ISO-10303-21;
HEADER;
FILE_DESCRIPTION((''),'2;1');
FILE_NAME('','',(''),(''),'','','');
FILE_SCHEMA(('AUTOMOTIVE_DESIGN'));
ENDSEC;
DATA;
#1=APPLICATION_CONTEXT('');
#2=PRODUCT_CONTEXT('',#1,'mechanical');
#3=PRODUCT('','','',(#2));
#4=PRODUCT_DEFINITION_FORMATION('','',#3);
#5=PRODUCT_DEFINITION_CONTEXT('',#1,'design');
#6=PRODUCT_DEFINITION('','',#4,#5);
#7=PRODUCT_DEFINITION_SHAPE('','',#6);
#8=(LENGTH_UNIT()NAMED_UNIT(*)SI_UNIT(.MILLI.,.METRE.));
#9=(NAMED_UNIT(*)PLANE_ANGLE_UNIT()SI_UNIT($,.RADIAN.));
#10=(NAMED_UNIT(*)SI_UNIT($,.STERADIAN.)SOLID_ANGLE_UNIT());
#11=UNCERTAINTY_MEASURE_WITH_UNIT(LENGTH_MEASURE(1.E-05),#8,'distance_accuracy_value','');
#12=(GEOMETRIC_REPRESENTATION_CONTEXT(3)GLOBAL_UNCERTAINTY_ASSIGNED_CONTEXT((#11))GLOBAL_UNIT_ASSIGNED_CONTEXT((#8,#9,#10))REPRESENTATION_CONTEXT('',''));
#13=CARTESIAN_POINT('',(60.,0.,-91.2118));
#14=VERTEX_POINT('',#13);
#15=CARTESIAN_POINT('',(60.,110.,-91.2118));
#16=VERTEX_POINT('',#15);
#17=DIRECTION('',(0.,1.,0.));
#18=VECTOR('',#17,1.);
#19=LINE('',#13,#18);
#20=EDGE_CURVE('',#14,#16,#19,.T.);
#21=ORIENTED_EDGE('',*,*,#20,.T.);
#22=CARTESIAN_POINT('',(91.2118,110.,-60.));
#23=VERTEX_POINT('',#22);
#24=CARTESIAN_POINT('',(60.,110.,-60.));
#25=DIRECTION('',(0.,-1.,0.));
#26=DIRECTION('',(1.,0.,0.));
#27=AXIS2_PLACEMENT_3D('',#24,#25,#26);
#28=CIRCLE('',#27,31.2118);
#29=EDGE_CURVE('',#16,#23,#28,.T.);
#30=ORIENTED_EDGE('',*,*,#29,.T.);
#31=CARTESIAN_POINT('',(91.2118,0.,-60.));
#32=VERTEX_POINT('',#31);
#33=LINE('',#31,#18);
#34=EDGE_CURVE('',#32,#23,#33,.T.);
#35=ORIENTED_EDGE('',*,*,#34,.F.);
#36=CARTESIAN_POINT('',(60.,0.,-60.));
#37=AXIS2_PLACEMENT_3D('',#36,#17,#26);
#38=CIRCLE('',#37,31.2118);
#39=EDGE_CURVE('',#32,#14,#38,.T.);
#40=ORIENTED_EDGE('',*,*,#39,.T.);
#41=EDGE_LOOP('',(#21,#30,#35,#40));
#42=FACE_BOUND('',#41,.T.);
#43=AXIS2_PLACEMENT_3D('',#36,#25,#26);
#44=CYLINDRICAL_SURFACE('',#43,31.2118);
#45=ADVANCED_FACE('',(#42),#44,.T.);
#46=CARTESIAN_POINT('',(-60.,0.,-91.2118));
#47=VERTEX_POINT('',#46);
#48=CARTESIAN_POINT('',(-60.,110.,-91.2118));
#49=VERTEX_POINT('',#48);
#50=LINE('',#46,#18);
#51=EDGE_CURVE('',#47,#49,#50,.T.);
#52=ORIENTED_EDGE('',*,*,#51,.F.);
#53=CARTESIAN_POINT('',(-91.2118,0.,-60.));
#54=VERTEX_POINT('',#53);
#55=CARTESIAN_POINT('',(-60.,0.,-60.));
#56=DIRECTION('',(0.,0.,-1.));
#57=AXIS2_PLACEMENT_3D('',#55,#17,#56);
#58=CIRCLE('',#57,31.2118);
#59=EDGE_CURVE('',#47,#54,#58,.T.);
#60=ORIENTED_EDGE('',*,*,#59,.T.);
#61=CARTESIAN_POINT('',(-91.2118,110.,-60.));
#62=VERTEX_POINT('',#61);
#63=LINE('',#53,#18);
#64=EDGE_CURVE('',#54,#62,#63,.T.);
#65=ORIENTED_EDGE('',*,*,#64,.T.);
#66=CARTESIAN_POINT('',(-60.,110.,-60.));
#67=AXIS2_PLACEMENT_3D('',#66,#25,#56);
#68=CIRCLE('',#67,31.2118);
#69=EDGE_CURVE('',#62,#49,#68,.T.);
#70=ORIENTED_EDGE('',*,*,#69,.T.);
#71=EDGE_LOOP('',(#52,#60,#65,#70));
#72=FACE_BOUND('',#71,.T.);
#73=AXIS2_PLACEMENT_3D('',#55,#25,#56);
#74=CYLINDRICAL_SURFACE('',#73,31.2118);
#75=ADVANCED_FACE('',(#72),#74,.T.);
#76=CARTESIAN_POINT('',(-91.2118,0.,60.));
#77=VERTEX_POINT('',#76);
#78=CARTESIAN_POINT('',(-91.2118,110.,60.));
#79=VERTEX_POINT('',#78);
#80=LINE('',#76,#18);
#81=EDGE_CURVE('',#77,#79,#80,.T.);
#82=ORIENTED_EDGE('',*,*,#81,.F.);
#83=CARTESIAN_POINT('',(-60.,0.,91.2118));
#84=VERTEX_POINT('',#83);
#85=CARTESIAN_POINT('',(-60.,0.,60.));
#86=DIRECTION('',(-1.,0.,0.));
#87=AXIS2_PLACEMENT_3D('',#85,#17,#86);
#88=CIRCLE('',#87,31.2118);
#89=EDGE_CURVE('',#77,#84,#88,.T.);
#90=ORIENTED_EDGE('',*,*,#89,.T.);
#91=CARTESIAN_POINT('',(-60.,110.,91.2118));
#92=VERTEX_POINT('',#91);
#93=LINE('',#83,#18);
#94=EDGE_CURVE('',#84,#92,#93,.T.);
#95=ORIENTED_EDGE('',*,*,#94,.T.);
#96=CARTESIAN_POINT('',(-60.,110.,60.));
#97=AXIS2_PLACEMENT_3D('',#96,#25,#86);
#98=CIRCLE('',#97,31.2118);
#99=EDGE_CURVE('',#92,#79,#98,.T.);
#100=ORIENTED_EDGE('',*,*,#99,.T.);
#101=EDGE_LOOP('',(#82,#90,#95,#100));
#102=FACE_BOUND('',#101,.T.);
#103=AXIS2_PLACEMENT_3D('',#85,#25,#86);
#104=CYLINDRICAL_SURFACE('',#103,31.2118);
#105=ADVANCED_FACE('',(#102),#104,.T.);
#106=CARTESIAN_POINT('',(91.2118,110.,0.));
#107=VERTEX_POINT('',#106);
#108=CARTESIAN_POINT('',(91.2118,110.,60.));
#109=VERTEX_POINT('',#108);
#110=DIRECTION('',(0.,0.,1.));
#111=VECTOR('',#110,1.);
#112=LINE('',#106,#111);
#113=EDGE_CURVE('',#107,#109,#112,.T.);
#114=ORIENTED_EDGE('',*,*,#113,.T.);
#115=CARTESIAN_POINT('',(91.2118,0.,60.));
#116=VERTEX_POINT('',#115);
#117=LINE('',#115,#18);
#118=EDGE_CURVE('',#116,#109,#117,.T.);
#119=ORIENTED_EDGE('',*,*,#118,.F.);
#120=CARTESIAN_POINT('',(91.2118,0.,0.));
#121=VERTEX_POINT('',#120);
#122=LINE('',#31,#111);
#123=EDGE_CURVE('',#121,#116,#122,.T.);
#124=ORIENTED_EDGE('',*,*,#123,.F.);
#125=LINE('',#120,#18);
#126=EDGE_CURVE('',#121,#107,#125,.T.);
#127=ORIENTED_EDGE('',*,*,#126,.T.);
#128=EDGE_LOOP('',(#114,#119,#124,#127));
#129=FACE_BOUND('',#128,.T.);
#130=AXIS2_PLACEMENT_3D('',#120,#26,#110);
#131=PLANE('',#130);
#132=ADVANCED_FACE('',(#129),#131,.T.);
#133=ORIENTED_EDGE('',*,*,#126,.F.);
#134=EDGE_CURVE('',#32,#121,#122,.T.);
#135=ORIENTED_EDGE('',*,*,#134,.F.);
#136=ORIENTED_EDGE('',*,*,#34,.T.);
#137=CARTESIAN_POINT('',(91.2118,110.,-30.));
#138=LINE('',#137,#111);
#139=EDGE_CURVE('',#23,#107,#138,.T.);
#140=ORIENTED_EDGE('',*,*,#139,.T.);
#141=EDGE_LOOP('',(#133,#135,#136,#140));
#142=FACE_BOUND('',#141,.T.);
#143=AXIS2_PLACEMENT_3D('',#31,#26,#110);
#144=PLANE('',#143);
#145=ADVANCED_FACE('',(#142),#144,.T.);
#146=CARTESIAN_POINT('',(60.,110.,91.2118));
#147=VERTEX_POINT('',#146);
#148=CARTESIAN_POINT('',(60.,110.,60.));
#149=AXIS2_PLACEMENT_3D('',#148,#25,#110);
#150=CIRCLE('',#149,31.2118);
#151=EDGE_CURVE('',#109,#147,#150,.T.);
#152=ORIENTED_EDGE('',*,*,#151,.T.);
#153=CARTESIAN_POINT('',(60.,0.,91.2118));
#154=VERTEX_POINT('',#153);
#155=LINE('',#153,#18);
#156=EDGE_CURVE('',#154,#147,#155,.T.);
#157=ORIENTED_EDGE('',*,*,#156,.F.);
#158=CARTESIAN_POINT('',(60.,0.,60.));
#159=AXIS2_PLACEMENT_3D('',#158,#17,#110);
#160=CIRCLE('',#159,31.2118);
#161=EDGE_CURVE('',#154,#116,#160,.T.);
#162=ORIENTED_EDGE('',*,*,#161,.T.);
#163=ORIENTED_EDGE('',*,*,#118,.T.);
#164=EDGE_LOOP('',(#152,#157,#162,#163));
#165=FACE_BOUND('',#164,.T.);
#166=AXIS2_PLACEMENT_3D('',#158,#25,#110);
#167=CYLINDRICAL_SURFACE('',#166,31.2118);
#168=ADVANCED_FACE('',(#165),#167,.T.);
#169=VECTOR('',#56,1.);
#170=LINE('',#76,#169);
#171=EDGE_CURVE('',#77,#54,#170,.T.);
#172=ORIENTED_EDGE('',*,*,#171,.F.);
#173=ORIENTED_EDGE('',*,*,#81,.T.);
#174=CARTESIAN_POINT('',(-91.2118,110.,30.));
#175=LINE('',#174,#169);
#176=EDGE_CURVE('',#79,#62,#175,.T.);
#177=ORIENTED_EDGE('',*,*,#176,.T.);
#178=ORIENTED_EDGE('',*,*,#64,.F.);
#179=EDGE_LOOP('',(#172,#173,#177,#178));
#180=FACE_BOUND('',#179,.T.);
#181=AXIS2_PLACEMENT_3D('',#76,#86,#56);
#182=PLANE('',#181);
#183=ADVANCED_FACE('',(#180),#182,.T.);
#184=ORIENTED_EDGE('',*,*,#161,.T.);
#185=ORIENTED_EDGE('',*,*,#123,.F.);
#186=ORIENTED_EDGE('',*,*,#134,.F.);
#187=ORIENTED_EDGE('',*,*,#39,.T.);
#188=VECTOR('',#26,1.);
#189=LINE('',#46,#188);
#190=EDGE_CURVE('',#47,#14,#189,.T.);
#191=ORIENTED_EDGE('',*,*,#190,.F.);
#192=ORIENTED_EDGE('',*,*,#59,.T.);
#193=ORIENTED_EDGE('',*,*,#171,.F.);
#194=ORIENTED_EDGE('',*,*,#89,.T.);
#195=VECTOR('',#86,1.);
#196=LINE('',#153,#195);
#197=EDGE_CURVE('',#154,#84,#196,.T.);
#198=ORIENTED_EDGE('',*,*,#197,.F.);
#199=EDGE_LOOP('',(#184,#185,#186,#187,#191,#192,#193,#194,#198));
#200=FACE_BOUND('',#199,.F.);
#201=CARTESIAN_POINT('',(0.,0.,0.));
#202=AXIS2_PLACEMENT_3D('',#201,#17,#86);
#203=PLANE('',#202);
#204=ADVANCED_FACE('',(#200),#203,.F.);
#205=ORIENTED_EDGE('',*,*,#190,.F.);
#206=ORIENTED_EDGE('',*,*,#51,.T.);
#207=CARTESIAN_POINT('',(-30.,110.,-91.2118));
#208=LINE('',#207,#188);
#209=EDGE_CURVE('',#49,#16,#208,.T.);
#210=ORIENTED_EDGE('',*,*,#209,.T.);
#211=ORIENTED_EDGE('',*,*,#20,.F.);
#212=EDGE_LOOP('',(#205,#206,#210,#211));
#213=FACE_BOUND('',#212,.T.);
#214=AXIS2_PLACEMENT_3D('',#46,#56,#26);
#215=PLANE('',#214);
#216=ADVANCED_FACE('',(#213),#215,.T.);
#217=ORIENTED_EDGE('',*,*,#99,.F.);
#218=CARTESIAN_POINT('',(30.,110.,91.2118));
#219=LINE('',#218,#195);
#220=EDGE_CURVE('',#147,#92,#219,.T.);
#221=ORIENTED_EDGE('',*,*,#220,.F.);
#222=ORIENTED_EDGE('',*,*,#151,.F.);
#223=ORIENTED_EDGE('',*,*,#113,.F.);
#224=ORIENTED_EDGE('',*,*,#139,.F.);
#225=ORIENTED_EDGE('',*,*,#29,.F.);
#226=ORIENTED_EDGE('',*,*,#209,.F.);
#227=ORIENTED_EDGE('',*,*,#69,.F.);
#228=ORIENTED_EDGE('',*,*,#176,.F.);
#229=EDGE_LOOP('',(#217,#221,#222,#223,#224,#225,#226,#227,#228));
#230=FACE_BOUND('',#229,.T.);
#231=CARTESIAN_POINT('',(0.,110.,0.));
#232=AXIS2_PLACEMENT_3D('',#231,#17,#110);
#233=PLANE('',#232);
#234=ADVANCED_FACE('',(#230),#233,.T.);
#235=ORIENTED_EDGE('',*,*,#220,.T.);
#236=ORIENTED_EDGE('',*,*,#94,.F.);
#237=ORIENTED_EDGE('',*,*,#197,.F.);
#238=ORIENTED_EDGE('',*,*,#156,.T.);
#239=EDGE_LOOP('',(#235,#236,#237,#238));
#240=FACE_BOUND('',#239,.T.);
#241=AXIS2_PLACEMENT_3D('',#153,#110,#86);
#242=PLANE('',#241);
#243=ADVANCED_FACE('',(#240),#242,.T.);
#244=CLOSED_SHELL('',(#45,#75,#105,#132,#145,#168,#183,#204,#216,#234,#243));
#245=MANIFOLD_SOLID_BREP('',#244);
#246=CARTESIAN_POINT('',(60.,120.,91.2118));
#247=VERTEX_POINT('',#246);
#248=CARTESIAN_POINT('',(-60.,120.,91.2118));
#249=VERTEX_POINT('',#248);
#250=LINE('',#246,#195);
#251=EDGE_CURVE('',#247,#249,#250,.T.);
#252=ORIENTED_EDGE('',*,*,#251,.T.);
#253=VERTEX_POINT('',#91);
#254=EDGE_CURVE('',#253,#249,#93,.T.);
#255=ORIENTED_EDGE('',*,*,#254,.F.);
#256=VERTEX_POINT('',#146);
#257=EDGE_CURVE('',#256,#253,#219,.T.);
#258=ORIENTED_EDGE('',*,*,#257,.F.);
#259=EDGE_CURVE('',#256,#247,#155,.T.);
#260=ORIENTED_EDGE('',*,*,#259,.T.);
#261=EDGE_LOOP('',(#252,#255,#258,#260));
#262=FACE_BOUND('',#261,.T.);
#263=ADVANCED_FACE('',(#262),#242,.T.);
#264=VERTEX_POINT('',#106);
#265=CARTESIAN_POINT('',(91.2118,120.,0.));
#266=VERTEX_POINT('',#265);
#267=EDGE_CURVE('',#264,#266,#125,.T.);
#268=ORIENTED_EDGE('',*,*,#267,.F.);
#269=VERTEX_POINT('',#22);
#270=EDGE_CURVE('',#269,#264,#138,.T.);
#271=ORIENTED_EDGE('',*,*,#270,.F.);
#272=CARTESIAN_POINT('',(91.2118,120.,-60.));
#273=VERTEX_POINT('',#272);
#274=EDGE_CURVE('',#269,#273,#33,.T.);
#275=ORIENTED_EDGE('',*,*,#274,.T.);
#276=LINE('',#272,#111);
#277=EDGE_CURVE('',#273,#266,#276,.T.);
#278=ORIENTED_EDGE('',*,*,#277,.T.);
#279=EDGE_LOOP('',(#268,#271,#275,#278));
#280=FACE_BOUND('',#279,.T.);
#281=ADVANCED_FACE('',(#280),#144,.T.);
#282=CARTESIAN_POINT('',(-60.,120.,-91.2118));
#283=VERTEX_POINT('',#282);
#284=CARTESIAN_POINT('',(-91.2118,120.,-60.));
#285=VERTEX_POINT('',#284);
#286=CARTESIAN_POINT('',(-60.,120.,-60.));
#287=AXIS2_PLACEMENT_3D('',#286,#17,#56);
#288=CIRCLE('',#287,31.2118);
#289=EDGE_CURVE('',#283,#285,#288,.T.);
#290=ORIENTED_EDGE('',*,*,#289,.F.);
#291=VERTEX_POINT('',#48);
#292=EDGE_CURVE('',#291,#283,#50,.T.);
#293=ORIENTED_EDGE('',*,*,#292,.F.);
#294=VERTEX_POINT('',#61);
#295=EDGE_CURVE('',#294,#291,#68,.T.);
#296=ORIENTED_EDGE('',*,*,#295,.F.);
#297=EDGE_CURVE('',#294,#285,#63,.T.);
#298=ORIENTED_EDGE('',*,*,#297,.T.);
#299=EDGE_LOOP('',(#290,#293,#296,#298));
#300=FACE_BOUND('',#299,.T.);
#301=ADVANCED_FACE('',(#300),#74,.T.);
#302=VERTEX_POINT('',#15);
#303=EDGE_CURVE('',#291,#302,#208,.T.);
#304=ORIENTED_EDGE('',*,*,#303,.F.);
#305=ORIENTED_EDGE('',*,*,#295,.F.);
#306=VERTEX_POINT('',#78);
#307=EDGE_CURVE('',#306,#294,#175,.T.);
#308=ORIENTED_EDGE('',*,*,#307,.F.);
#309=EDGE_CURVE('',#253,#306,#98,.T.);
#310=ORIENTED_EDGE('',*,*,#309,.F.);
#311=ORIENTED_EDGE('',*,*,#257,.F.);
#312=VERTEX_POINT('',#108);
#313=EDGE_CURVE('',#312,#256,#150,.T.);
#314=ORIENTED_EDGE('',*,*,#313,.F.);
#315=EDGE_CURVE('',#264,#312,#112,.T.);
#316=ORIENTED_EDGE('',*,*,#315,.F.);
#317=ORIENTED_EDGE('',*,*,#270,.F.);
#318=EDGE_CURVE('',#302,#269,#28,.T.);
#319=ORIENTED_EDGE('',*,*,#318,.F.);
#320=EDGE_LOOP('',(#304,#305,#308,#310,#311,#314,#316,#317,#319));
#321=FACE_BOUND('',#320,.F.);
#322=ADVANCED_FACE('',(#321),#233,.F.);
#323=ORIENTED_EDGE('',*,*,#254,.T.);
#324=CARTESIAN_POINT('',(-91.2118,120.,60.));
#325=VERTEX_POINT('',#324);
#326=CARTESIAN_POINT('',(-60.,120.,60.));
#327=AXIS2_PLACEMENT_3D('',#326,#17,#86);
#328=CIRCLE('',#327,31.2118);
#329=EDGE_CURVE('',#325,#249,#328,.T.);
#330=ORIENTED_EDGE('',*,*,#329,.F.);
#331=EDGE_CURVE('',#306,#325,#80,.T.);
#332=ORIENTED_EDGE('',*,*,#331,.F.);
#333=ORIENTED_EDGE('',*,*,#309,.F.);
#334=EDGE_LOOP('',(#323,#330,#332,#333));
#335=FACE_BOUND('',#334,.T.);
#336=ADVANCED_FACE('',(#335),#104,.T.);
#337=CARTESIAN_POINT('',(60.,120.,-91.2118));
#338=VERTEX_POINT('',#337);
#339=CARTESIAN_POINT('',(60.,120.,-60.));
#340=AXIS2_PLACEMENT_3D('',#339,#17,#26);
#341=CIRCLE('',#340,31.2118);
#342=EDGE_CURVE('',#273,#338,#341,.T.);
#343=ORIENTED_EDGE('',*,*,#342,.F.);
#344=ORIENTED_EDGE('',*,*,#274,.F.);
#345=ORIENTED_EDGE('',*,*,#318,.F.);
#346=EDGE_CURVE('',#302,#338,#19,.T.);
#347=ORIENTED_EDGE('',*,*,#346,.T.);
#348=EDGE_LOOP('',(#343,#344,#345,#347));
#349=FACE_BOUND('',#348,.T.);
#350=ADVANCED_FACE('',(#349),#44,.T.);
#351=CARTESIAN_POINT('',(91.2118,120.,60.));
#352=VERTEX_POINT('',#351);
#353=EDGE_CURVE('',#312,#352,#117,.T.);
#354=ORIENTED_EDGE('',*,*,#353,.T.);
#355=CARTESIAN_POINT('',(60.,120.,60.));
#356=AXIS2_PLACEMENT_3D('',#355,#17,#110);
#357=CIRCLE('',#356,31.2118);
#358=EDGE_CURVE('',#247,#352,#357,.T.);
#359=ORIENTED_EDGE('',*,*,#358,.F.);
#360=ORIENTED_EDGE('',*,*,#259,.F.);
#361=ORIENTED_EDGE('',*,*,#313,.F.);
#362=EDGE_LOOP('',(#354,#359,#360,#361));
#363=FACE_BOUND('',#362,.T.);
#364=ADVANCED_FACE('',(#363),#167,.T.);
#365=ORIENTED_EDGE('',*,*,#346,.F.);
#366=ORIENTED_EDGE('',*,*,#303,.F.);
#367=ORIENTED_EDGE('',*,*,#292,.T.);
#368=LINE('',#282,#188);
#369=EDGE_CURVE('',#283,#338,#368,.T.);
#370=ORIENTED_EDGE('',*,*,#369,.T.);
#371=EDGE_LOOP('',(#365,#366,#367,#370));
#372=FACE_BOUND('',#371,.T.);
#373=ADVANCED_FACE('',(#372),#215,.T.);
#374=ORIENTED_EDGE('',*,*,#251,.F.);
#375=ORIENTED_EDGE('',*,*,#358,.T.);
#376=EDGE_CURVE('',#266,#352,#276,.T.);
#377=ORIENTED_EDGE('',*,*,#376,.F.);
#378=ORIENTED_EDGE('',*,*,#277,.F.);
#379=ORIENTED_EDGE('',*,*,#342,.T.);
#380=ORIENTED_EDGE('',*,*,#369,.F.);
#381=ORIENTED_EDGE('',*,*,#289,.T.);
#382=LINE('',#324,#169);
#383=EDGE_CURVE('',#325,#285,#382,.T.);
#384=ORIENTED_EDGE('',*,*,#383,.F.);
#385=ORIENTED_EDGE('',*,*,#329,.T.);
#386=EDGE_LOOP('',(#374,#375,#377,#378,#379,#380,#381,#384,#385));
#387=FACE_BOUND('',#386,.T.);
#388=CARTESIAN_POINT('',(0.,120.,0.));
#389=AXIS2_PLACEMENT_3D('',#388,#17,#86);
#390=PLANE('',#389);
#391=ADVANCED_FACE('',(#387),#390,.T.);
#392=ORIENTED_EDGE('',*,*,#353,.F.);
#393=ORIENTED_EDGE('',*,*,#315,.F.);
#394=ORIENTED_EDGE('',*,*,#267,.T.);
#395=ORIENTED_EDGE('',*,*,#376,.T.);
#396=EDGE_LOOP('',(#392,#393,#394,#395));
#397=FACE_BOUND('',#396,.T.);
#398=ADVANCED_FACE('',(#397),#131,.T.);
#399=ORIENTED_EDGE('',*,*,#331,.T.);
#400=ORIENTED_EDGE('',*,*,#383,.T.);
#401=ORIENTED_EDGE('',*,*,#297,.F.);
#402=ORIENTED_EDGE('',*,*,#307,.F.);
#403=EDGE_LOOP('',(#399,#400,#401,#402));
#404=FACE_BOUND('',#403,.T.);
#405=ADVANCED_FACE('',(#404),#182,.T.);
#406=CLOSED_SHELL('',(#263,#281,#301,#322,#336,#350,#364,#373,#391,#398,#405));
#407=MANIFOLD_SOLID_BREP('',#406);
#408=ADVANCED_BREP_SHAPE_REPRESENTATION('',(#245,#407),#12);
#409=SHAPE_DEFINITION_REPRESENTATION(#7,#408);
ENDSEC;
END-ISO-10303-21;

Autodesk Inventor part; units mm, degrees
ref_plane "YZ Plane" through (0, 0, 0) normal (1, 0, 0) x (0, 1, 0)
ref_plane "XY Plane" through (0, 0, 0) normal (0, 0, 1) x (1, 0, 0)
sketch "Sketch1" plane through (0, 0, 0) normal (0, 1, 0) x (-1, 0, 0)
  line L0 (91.2118, 60) -> (91.2118, -60)
  arc A0 (60, -91.2118) -> (91.2118, -60) centre (60, -60) ccw
  arc A1 (-91.2118, -60) -> (-60, -91.2118) centre (-60, -60) ccw
  line L1 (-91.2118, -60) -> (-91.2118, 60)
  line L2 (-91.2118, 60) -> (-91.2118, 0)
  arc A2 (-60, 91.2118) -> (-91.2118, 60) centre (-60, 60) ccw
  line L3 (-60, 91.2118) -> (60, 91.2118)
  arc A3 (91.2118, 60) -> (60, 91.2118) centre (60, 60) ccw
  line L4 (60, -91.2118) -> (-60, -91.2118)
  line L5 (91.2118, 0) -> (-91.2118, 0) construction
  line L6 (0, -91.2118) -> (0, 91.2118) construction
  point P0 (0, 0)
  point P1 (0, 0)
  dimension "d15" = 120
  dimension "d17" = 120
  dimension "d18" = 120
  dimension "d19" = 120
  dimension "d20" = 31.2118
ref_plane "Work Plane1" through (0, 110, 0) normal (0, 1, 0) x (-1, 0, 0)
extrude "Extrusion2" add sketch "Sketch1" along normal blind 120
split body "Split1" result two bodies by plane through (0, 110, 0) normal (0, 1, 0) first body at (-30.4039, 110.5, 0)
equation "\"d18\" = d17"
equation "\"d19\" = d18"
properties part number "case" material "PET Plastic"
